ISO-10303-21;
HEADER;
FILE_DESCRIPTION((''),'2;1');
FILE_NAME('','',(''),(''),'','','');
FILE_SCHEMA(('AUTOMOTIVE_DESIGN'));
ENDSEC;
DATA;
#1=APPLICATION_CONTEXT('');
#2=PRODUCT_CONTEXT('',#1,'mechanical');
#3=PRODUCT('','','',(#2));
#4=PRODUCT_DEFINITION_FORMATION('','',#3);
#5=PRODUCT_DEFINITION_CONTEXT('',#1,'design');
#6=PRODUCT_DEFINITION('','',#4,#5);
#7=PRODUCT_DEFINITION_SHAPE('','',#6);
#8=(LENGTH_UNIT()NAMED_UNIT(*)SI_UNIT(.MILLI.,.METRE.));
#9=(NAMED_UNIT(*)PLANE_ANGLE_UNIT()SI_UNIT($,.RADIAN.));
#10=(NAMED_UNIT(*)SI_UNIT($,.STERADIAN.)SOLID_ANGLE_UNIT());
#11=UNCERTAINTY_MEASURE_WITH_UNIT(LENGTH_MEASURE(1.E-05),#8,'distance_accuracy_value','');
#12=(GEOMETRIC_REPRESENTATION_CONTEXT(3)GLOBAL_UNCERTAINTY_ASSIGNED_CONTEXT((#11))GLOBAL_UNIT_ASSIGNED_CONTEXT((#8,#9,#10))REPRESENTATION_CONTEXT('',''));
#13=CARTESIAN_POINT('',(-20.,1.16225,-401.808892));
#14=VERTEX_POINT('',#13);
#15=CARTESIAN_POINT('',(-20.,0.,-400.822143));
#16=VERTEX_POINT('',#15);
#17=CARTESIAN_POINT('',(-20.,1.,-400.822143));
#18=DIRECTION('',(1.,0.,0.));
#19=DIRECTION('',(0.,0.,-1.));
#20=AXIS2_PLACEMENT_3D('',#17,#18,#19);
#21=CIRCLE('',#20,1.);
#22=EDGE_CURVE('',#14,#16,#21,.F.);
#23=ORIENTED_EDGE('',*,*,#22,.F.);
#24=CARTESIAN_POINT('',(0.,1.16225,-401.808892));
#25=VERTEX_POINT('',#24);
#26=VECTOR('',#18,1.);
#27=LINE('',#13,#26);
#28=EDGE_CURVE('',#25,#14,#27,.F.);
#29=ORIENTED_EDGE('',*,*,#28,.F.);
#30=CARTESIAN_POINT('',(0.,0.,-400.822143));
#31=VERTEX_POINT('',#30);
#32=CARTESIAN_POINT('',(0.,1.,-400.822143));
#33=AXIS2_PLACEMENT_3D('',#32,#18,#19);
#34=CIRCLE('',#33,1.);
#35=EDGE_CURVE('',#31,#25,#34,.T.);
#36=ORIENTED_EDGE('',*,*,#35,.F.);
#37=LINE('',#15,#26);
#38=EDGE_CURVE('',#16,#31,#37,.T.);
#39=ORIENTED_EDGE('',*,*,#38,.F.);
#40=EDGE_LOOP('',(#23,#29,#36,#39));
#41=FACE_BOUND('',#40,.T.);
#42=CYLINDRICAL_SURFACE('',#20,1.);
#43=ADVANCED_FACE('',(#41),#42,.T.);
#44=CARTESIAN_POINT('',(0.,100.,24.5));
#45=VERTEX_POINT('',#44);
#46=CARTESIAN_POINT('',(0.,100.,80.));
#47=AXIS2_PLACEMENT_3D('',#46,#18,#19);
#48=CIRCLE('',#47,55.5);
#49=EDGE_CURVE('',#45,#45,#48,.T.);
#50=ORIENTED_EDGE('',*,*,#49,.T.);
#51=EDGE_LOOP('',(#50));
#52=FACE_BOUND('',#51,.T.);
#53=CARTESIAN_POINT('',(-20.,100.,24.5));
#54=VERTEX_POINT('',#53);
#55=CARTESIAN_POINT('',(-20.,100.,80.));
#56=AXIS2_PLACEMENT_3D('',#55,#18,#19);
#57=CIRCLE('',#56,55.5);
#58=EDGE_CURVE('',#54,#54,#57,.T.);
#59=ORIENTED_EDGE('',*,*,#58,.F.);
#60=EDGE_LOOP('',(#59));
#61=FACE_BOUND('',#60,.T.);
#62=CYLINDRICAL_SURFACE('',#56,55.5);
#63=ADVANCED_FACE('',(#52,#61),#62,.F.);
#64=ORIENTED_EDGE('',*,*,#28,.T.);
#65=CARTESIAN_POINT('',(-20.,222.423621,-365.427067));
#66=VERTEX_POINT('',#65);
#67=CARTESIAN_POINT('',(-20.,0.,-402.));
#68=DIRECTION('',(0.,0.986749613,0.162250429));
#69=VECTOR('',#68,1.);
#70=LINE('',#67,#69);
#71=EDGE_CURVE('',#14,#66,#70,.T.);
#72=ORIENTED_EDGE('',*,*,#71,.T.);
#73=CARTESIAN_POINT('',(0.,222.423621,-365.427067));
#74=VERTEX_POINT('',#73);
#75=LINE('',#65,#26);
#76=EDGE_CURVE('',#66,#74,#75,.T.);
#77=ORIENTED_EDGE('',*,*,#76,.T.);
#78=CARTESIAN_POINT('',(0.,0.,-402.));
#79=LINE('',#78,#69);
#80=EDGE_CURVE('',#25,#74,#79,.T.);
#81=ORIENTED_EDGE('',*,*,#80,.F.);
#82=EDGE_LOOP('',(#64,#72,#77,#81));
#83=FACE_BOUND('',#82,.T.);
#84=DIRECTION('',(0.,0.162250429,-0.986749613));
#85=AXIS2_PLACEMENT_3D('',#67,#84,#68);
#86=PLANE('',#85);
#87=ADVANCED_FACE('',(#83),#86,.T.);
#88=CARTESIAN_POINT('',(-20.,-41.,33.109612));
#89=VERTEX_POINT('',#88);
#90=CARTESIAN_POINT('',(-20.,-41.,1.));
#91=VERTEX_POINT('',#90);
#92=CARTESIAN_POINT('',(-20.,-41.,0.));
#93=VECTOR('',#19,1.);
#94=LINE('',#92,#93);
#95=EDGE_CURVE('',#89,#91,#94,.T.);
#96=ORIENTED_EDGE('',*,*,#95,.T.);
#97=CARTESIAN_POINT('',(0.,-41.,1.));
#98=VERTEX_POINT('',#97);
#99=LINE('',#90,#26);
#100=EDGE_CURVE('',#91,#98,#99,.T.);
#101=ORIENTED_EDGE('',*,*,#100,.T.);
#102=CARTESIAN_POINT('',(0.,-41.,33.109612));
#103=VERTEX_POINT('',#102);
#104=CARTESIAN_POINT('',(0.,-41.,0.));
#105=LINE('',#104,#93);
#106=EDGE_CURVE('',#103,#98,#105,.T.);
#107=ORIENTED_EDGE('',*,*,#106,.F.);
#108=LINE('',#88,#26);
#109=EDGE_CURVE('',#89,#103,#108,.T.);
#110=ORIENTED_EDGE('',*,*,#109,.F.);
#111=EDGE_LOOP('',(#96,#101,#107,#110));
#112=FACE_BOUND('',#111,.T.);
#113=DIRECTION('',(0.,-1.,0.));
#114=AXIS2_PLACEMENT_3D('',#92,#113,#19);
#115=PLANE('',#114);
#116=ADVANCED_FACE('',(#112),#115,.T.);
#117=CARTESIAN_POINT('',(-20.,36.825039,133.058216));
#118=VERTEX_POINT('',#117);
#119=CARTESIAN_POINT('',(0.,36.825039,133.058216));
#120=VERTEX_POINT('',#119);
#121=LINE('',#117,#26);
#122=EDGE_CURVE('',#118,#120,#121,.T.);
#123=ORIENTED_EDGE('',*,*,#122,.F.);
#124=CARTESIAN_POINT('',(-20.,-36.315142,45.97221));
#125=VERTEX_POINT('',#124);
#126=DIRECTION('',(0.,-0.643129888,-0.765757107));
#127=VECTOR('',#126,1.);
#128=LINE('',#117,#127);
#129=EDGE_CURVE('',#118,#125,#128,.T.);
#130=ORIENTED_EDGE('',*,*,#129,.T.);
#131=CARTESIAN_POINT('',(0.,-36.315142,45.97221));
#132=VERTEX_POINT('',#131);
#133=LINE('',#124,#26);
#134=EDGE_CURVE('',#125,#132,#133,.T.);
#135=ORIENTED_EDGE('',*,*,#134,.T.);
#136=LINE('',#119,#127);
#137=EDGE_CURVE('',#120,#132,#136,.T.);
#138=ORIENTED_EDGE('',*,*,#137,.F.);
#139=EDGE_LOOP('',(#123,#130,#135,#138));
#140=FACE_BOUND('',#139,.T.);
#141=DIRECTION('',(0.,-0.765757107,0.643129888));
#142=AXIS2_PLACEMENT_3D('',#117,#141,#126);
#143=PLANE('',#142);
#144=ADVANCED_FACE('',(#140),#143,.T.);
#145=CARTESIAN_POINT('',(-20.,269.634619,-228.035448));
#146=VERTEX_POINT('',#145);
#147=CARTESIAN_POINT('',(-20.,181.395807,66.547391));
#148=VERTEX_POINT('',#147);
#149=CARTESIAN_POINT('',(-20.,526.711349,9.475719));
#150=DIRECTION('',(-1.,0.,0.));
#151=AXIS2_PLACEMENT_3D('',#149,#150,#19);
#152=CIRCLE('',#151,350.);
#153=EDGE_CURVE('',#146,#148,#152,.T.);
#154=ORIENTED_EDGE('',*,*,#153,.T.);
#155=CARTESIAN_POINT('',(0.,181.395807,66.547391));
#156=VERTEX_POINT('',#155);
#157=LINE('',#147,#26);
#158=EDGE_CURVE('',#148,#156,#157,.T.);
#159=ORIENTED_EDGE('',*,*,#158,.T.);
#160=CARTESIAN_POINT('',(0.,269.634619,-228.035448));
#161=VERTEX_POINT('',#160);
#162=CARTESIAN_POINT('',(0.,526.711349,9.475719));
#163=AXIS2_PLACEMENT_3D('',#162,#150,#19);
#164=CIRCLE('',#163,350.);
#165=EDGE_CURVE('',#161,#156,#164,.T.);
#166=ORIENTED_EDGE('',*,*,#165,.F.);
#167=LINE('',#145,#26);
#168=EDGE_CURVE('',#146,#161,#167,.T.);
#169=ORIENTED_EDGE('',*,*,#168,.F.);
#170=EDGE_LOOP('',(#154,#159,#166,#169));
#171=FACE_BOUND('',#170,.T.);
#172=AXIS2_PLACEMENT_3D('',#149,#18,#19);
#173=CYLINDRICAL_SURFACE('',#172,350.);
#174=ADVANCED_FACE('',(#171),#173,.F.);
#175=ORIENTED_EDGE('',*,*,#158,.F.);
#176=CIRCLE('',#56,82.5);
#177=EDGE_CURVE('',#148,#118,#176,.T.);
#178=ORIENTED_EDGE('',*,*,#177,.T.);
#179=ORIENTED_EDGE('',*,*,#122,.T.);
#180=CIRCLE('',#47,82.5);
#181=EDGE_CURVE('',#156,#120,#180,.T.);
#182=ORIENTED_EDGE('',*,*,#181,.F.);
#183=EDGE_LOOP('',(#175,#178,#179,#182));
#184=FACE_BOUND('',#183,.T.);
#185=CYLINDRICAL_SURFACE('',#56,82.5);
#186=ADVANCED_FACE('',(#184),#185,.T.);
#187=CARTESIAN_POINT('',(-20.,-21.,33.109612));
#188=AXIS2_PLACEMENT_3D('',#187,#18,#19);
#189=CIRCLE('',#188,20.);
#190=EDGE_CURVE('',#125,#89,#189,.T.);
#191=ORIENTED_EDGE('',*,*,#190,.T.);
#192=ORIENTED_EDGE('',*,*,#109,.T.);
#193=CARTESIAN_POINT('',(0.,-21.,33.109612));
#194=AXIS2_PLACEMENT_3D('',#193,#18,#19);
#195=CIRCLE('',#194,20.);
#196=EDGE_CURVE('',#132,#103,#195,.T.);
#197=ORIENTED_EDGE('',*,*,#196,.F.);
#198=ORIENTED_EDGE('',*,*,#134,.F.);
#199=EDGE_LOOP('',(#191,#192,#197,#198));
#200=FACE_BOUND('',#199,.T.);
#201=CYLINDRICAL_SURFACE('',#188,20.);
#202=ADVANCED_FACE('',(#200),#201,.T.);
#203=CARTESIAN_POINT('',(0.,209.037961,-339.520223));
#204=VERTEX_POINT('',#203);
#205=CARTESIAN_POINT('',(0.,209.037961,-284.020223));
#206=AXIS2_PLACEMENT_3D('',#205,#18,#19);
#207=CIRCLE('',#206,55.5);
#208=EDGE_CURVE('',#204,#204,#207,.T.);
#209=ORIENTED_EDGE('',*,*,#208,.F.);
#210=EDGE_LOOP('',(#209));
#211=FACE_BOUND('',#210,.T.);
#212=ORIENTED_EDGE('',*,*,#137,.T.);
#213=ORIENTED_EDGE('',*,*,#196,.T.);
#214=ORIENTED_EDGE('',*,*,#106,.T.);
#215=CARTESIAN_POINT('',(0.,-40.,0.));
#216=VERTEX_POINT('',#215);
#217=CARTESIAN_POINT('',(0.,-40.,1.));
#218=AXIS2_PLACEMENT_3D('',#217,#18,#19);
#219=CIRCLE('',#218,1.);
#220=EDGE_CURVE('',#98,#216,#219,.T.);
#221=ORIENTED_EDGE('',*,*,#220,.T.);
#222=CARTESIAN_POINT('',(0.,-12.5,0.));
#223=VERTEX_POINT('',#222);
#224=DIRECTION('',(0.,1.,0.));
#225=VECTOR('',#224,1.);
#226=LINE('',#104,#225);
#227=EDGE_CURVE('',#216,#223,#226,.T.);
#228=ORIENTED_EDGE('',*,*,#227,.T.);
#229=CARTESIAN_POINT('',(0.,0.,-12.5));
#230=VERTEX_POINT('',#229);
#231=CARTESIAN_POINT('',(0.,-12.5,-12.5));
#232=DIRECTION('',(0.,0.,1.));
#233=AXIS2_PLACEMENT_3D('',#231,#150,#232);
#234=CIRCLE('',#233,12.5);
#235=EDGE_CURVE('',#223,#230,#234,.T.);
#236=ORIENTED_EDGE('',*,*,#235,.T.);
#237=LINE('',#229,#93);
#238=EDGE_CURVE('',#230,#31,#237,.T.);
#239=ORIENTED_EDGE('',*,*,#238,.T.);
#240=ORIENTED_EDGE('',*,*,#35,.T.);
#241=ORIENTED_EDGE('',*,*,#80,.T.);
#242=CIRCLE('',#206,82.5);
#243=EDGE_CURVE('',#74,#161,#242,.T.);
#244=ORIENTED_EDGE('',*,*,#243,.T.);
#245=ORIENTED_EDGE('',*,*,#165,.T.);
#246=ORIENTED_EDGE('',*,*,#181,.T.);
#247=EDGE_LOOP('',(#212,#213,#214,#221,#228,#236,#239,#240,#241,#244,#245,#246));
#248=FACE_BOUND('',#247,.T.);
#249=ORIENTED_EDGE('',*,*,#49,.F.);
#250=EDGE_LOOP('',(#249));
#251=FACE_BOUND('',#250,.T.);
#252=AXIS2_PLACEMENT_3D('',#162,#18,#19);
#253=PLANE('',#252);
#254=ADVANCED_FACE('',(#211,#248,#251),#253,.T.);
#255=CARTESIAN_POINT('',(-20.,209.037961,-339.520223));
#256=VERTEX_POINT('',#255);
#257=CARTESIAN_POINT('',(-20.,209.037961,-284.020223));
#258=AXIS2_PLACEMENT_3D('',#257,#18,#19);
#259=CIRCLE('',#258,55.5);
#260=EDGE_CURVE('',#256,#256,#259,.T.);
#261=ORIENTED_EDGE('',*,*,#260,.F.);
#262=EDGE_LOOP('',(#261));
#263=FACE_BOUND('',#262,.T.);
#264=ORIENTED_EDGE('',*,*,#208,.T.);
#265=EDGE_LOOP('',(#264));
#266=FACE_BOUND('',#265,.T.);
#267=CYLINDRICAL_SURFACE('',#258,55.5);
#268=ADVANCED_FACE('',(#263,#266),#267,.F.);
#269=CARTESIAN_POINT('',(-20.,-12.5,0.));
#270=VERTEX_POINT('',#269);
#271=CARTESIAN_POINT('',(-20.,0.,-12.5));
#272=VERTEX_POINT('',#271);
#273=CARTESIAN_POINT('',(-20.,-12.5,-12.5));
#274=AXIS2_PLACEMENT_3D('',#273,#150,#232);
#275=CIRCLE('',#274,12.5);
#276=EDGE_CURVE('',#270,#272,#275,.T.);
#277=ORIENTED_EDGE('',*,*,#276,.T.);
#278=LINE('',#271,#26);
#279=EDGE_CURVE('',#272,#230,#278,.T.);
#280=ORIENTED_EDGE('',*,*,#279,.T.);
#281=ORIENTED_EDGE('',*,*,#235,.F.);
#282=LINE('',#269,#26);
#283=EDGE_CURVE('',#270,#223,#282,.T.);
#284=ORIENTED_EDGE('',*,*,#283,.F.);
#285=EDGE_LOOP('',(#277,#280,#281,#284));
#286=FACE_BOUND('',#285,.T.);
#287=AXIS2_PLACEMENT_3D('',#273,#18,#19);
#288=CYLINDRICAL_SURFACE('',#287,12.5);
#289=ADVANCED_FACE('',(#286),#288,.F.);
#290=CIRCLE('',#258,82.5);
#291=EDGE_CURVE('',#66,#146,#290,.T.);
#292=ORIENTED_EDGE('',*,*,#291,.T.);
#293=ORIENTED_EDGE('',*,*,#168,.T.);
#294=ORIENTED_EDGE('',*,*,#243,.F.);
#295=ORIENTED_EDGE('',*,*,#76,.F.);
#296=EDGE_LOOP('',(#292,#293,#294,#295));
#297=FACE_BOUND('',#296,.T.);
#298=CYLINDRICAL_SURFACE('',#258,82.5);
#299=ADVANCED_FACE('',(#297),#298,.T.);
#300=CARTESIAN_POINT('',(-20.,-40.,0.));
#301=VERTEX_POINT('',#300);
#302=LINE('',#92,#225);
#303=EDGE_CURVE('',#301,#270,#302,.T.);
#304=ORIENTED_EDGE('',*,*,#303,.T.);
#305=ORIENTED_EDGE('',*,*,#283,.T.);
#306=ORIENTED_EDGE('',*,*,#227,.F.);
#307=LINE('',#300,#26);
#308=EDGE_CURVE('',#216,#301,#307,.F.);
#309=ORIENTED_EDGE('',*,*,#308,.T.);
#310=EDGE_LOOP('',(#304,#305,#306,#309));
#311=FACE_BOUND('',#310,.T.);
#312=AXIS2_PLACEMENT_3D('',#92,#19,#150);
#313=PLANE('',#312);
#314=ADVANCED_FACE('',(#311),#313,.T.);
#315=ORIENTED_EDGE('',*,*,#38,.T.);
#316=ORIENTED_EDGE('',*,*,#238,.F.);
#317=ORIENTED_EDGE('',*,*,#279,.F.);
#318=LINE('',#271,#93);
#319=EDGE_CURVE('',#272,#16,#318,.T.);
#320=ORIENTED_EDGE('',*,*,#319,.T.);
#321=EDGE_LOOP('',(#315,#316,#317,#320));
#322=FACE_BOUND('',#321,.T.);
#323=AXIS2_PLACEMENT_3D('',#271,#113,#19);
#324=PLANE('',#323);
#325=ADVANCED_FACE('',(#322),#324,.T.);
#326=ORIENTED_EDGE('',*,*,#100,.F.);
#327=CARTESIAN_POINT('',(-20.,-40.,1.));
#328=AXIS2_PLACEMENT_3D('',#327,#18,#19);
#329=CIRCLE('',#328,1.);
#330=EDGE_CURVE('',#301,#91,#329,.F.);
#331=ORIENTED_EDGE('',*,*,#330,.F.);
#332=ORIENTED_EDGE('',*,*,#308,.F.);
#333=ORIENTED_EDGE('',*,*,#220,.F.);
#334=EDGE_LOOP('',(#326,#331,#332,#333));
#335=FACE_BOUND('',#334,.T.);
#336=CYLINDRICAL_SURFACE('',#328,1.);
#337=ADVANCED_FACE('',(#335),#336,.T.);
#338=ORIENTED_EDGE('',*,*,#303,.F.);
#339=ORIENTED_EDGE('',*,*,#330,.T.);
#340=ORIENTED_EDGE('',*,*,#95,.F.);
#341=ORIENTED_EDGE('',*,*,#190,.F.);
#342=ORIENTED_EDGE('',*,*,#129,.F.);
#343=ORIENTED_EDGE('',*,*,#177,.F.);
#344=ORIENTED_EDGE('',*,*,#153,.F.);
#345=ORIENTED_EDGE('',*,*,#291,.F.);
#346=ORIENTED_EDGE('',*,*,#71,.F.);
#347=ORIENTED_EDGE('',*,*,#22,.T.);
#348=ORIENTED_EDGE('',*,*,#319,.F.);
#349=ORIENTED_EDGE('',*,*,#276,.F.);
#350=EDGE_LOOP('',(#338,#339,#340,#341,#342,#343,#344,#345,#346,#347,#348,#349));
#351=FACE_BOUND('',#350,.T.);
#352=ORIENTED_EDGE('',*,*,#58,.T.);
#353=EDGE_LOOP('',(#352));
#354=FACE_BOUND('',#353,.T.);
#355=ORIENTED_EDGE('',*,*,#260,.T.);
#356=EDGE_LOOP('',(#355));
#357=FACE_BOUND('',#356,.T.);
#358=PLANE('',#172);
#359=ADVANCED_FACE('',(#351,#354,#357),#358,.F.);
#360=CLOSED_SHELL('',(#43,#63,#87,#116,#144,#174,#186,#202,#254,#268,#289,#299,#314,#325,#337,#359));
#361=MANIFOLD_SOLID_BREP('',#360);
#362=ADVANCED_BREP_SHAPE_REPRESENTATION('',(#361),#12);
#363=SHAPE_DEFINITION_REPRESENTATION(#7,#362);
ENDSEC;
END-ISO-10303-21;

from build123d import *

# Parameters (mm, degrees)
SKETCH1_R          = 55.5
BASE_FLANGE1_DEPTH = 20
FILLET_1_0_R       = 1


# Sheet-metal steps are written as plain solids
with BuildPart() as part:
    # Sketch1 → Base-Flange1 (new body)
    with BuildSketch(Plane(origin=(0, 0, 0), x_dir=(0, 0, -1), z_dir=(1, 0, 0))):
        with BuildLine():
            Line((0, -41), (0, -12.5))
            ThreePointArc((0, -12.5), (3.661165235, -3.661165235), (12.5, 0))
            Line((12.5, 0), (402, 0))
            Line((402, 0), (365.427066504, 222.423621298))
            ThreePointArc((365.427066504, 222.423621298), (310.830481873, 287.060137522), (228.035448315, 269.634618846))
            ThreePointArc((228.035448315, 269.634618846), (90.953981912, 191.429564728), (-66.547391471, 181.395806549))
            ThreePointArc((-66.547391471, 181.395806549), (-154.948834301, 134.480751686), (-133.058215758, 36.825038658))
            Line((-133.058215758, 36.825038658), (-45.972209781, -36.315142143))
            ThreePointArc((-45.972209781, -36.315142143), (-39.95421417, -39.792323471), (-33.109612021, -41))
            Line((-33.109612021, -41), (0, -41))
        make_face()
        with Locations((-80, 100)):
            Circle(SKETCH1_R, mode=Mode.SUBTRACT)
        with Locations((284.02022345, 209.037960909)):
            Circle(SKETCH1_R, mode=Mode.SUBTRACT)
    extrude(amount=-BASE_FLANGE1_DEPTH)

    # Fillet-1.0
    fillet_1_0_edges = [part.edges().sort_by_distance(p)[0] for p in [
        (-10, 0, -402),
        (-10, -41, 0),
    ]]
    fillet(fillet_1_0_edges, radius=FILLET_1_0_R)


solid = part.part
